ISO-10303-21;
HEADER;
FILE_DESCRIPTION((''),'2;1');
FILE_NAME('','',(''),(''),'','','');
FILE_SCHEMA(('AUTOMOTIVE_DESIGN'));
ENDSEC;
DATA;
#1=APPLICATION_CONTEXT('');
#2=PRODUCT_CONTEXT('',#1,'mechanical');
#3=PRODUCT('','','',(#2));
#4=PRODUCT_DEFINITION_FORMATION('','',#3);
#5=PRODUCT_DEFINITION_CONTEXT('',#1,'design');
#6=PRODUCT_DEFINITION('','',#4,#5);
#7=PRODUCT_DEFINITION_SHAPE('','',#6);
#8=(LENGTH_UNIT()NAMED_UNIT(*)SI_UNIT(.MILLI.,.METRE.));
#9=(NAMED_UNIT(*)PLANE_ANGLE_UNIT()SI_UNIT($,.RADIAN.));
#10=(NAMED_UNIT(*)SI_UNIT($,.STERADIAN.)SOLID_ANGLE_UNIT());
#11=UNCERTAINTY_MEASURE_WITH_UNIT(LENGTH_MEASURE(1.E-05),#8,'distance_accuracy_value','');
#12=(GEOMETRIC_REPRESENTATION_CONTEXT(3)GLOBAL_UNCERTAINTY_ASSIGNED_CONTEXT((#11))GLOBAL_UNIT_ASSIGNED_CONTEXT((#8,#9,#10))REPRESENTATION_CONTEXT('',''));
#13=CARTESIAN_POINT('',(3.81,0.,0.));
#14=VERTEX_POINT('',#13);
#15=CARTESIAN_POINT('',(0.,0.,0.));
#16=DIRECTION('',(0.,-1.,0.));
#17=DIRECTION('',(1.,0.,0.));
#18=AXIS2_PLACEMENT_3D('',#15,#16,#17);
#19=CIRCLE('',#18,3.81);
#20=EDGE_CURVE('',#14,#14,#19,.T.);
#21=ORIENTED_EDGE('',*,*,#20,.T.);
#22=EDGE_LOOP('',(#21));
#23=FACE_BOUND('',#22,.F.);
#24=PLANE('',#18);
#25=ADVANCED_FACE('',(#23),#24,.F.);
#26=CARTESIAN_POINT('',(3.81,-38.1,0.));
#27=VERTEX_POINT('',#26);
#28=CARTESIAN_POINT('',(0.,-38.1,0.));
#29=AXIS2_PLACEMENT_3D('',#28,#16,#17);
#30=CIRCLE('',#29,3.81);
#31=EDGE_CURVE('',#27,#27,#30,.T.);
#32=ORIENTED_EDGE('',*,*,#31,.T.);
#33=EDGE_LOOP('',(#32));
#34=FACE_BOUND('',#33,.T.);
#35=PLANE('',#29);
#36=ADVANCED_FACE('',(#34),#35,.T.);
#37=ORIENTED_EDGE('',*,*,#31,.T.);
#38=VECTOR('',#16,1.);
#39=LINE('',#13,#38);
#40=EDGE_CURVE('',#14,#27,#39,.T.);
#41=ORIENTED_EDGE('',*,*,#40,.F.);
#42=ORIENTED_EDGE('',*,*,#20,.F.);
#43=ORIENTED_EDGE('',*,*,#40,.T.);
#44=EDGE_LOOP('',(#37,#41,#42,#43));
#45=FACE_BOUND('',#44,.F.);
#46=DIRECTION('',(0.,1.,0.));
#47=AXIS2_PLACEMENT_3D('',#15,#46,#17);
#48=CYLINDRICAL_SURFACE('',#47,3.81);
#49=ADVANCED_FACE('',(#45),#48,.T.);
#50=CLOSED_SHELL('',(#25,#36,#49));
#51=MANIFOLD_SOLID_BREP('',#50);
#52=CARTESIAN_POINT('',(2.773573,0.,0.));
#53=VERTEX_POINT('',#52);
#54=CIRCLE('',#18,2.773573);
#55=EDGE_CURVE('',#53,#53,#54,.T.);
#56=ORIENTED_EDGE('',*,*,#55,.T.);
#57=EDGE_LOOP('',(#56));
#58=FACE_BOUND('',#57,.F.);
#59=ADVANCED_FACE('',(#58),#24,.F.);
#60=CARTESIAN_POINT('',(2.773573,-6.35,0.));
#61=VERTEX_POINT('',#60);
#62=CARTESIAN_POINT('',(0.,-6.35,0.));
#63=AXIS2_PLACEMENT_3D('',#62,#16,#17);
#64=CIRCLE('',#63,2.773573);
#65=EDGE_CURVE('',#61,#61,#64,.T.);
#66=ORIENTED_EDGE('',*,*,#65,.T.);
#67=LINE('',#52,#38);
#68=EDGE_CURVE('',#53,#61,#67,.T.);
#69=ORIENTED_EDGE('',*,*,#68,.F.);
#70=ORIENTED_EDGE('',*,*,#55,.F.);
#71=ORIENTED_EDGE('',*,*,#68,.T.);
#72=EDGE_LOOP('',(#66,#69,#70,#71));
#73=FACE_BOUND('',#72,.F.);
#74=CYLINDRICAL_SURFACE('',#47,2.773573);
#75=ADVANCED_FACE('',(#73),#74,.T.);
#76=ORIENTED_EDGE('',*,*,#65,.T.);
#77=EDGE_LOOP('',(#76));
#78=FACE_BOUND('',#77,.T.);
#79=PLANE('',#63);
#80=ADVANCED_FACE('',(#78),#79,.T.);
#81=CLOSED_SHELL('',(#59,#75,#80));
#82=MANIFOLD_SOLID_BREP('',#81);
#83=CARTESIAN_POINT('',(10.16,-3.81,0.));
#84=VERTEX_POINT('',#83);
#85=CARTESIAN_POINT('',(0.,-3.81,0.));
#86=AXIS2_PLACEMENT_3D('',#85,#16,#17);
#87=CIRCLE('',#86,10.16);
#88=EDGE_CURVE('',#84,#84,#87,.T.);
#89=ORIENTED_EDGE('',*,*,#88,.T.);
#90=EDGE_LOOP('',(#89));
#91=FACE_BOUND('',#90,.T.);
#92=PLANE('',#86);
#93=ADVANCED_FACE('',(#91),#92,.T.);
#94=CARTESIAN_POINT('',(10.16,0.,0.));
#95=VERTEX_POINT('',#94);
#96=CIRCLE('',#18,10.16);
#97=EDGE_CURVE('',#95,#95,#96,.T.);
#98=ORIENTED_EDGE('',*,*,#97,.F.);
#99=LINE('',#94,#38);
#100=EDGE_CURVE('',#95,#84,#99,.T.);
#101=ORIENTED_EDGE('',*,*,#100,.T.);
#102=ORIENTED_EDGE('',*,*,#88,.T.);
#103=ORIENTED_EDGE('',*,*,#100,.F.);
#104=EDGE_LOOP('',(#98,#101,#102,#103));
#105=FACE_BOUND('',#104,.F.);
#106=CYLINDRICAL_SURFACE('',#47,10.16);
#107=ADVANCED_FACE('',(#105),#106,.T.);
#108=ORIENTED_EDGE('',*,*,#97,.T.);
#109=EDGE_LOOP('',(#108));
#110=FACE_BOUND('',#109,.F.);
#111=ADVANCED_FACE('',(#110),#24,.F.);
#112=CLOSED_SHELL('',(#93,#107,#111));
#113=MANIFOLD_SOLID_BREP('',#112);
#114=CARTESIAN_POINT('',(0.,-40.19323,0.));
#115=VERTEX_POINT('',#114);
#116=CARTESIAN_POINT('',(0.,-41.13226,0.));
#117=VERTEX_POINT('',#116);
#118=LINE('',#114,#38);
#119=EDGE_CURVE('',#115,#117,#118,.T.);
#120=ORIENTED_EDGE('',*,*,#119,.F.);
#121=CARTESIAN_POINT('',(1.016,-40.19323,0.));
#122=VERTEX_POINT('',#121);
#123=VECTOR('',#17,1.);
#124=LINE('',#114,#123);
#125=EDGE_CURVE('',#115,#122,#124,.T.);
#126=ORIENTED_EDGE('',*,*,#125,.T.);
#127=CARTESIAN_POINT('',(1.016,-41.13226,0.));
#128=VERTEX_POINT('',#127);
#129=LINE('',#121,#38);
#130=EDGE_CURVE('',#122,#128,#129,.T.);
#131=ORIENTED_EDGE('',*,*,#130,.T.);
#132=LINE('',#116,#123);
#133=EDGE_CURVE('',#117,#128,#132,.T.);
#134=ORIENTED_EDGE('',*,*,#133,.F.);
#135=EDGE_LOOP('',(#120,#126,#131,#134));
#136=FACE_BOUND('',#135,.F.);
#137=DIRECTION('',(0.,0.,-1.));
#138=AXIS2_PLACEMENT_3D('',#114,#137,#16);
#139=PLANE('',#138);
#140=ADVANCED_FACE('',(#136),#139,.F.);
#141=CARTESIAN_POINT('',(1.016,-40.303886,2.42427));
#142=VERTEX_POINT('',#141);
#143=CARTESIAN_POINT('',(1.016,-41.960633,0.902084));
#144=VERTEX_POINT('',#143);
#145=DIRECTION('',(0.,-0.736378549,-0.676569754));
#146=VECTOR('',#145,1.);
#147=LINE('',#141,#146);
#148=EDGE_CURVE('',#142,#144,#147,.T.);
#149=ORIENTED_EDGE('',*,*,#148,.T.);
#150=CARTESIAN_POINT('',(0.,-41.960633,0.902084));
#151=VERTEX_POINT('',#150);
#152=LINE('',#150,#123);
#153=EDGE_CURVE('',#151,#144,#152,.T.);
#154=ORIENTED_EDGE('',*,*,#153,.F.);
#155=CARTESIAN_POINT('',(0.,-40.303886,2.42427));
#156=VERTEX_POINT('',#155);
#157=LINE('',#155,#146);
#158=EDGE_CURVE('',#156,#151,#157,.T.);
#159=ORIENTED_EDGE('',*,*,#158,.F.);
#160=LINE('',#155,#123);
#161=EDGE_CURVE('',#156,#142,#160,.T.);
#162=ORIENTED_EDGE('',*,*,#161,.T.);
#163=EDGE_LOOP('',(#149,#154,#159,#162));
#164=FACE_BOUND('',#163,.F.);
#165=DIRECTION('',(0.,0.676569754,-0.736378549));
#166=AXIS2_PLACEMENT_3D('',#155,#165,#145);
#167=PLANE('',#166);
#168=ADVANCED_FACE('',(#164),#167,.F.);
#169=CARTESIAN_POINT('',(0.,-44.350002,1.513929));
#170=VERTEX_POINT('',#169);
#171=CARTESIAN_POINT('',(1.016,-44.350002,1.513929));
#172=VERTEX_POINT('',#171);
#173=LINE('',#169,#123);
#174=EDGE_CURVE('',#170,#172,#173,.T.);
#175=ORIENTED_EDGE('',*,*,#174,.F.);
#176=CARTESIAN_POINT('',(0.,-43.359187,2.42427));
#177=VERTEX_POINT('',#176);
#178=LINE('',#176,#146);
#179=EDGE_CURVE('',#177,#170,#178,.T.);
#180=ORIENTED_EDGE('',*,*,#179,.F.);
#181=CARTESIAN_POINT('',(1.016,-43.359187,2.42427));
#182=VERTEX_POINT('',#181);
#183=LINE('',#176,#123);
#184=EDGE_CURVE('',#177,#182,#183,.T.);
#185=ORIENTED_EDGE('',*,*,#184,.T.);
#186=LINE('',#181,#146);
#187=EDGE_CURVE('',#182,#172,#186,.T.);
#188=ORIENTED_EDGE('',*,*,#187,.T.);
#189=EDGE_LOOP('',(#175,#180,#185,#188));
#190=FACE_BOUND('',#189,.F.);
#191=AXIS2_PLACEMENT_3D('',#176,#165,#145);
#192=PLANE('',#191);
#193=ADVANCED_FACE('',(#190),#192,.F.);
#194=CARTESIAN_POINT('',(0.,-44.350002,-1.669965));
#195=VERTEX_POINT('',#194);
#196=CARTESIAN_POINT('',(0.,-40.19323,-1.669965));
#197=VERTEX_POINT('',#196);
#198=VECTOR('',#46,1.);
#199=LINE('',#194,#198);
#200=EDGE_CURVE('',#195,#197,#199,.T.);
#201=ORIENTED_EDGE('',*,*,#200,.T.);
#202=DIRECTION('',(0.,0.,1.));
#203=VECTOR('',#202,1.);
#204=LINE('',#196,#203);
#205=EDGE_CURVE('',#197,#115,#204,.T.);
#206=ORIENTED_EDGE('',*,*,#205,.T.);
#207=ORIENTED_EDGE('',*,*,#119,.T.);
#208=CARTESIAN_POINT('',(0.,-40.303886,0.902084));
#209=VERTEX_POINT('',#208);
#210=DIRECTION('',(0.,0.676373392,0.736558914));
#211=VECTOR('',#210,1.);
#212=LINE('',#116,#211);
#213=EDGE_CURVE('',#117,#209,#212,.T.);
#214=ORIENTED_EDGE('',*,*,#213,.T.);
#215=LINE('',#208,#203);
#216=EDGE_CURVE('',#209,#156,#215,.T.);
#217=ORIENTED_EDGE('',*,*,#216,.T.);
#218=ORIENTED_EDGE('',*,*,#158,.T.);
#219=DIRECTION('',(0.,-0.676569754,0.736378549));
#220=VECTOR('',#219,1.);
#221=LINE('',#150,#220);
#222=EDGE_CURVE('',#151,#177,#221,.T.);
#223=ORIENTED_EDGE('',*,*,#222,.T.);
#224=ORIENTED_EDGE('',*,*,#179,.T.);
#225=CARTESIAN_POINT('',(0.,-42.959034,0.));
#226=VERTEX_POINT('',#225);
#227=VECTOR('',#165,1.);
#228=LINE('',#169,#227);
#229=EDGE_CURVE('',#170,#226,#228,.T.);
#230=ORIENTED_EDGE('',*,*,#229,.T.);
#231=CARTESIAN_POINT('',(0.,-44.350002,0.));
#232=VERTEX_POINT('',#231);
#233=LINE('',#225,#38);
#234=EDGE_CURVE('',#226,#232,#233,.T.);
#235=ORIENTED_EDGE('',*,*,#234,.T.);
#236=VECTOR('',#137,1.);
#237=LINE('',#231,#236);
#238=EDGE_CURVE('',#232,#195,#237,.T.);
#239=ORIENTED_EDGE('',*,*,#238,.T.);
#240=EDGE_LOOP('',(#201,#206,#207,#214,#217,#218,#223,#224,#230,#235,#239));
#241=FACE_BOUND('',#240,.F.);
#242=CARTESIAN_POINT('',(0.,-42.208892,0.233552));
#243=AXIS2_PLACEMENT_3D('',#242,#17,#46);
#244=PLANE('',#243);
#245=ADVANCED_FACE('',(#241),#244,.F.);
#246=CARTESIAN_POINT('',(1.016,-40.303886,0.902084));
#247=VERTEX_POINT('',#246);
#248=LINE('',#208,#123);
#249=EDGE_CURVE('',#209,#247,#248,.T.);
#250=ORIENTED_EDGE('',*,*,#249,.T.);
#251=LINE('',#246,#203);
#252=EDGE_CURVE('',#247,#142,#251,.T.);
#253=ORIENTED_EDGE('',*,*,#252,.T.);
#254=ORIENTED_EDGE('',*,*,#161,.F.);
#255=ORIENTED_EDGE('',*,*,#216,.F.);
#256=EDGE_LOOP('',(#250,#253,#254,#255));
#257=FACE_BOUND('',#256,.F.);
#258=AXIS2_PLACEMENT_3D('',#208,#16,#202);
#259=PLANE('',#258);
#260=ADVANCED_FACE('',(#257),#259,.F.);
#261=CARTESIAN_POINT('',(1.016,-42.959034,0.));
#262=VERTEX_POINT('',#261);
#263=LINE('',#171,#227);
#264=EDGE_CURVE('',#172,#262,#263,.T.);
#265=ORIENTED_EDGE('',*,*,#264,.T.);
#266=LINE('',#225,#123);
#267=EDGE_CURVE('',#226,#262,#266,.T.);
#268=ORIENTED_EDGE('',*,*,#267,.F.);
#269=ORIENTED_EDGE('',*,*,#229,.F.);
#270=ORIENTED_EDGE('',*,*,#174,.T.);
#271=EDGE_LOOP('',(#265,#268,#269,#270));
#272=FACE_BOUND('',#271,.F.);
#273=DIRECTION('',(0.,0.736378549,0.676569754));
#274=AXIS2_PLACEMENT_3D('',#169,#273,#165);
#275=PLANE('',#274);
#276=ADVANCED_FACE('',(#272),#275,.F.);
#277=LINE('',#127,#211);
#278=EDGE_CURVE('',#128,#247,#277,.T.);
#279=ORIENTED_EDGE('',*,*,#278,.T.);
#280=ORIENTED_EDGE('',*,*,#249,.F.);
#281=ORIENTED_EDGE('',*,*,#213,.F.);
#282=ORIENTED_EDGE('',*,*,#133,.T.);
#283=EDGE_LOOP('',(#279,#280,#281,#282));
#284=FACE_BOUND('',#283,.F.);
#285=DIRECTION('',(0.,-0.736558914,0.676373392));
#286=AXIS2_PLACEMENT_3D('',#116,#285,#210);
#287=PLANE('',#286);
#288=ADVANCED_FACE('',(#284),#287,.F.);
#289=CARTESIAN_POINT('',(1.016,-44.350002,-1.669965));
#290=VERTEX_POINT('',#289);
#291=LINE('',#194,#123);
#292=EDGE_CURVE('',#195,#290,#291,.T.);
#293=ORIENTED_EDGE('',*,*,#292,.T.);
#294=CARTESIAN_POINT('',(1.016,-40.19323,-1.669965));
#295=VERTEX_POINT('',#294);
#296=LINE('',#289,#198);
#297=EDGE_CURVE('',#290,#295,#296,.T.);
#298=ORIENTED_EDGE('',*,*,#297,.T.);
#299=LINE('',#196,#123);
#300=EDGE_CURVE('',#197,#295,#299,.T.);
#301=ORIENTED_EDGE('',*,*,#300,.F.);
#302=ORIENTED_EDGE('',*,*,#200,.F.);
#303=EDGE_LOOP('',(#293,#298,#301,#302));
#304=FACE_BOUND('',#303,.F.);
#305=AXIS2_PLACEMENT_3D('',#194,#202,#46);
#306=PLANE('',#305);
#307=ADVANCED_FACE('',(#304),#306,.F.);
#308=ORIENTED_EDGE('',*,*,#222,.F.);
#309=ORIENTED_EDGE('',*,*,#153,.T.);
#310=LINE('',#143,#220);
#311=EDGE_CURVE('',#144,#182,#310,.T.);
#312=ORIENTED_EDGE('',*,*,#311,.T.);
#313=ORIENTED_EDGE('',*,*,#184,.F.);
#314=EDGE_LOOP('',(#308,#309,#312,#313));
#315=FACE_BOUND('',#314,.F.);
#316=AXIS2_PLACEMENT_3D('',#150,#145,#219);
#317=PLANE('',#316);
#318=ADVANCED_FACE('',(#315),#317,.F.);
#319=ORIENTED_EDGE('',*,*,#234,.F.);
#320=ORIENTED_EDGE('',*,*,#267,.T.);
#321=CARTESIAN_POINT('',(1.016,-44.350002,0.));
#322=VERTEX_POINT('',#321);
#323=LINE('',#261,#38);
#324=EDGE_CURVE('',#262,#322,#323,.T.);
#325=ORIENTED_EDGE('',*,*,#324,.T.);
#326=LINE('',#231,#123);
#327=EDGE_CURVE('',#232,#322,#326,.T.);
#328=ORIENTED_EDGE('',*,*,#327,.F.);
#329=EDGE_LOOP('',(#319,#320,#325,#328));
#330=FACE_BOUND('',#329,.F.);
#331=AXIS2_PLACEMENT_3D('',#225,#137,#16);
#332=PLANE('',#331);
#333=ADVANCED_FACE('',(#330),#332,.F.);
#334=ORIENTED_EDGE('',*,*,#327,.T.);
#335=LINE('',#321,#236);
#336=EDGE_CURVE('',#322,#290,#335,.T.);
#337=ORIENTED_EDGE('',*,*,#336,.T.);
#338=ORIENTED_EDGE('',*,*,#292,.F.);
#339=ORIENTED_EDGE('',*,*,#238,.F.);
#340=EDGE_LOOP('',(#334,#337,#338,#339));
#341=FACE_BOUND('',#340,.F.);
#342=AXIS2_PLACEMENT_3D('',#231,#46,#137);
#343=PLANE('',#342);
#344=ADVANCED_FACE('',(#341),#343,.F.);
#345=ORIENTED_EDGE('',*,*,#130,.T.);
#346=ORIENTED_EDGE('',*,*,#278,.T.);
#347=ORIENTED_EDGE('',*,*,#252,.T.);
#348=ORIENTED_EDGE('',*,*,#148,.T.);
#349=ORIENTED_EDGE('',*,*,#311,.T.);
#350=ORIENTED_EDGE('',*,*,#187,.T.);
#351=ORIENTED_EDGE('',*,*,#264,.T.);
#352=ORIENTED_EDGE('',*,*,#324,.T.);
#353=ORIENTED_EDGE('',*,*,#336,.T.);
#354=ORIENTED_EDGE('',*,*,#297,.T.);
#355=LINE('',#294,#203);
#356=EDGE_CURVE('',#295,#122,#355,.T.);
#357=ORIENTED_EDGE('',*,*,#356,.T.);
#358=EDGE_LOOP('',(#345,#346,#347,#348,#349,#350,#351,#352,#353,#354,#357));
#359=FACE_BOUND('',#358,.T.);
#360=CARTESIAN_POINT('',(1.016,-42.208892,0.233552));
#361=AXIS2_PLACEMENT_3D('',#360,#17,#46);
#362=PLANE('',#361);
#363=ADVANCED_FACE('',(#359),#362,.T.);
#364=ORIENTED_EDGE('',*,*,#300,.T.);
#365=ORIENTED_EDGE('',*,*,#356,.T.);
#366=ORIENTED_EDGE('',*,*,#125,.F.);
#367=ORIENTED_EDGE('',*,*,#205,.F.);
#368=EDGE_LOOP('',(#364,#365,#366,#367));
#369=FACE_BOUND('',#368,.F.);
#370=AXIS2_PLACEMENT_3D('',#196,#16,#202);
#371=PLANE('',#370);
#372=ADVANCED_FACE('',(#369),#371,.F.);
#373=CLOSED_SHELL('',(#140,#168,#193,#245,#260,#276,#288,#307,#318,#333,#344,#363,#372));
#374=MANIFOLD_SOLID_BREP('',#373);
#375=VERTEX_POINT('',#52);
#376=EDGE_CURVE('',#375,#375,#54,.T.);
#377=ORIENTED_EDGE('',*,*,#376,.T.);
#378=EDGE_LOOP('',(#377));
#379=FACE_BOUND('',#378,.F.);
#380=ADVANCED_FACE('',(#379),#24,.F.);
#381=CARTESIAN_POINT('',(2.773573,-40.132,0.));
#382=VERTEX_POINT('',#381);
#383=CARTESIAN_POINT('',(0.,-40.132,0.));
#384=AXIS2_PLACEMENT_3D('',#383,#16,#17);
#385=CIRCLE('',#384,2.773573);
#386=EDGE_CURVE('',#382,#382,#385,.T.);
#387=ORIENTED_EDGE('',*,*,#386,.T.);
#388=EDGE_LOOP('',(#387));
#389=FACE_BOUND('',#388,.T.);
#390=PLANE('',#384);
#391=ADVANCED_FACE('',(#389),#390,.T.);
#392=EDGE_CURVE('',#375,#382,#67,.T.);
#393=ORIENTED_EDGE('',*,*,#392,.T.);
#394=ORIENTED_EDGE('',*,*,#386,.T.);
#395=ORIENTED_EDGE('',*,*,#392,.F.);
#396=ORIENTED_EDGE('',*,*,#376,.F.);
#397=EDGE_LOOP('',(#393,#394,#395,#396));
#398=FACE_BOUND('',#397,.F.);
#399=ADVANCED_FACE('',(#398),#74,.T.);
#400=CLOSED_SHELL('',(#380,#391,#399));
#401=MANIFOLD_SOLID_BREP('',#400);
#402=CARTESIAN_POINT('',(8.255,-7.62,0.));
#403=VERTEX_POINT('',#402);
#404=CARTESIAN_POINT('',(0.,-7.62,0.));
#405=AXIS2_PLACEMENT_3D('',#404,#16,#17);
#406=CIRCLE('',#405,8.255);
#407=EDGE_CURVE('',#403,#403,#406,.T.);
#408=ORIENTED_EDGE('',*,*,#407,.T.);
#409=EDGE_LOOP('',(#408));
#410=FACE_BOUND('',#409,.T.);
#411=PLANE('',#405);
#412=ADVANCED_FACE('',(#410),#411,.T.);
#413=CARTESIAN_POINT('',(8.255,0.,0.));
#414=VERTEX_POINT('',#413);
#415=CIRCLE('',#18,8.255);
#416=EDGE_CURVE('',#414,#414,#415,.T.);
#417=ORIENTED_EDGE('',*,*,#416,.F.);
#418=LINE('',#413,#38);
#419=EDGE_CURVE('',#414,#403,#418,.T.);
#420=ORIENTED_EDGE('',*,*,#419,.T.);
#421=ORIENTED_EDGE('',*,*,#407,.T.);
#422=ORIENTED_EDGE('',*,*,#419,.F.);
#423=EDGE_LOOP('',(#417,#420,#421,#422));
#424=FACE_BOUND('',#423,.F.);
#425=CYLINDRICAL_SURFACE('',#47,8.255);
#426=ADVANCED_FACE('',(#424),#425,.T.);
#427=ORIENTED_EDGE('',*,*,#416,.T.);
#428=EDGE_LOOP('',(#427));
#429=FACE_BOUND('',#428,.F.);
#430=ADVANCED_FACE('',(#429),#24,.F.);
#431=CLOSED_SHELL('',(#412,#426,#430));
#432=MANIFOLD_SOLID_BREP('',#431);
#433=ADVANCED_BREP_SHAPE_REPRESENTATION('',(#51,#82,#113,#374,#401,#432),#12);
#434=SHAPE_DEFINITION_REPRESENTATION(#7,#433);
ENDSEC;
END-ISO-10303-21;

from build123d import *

# Parameters (mm, degrees)
F0_R      = 10.16
F1_DEPTH  = 3.81
F2_R      = 8.255
F3_DEPTH  = 7.62
F4_R      = 3.81
F5_DEPTH  = 38.1
F6_R      = 2.7735730364
F7_DEPTH  = 6.35
F8_DEPTH  = 40.132
F12_DEPTH = 1.016


# Not quite as in the source:
# - a feature names something its author has since deleted; it is built from what else it names
# - the program builds the solid bodies; features that only make, move or delete a surface that nothing else refers to are left out


with BuildPart() as f1:
    # F0 (on Front) → F1 (new body)
    with BuildSketch(Plane.XZ):
        Circle(F0_R)
    extrude(amount=F1_DEPTH)


with BuildPart() as f3:
    # F2 (on Front) → F3 (new body)
    with BuildSketch(Plane.XZ):
        Circle(F2_R)
    extrude(amount=F3_DEPTH)


with BuildPart() as f5:
    # F4 (on Front) → F5 (new body)
    with BuildSketch(Plane.XZ):
        Circle(F4_R)
    extrude(amount=F5_DEPTH)


with BuildPart() as f7:
    # F6 (on Front) → F7 (new body)
    with BuildSketch(Plane.XZ):
        Circle(F6_R)
    extrude(amount=F7_DEPTH)


with BuildPart() as f8:
    # F6 (on Front) → F8 (new body)
    with BuildSketch(Plane.XZ):
        Circle(F6_R)
    extrude(amount=F8_DEPTH)


with BuildPart() as f12:
    # F11 (on Right) → F12 (new body)
    with BuildSketch(Plane.YZ):
        Polygon((-40.1932299137, -1.6699645203), (-40.1932299137, 0), (-41.132259817, 0), (-40.3038863301, 0.9020843856), (-40.3038863301, 2.4242700788), (-41.9606333038, 0.9020843856), (-43.3591868075, 2.4242700788), (-44.350001961, 1.5139291063), (-42.9590344429, 0), (-44.350001961, 0), (-44.350001961, -1.6699645203), align=None)
    extrude(amount=F12_DEPTH)


solid = Compound([f1.part, f3.part, f5.part, f7.part, f8.part, f12.part])
